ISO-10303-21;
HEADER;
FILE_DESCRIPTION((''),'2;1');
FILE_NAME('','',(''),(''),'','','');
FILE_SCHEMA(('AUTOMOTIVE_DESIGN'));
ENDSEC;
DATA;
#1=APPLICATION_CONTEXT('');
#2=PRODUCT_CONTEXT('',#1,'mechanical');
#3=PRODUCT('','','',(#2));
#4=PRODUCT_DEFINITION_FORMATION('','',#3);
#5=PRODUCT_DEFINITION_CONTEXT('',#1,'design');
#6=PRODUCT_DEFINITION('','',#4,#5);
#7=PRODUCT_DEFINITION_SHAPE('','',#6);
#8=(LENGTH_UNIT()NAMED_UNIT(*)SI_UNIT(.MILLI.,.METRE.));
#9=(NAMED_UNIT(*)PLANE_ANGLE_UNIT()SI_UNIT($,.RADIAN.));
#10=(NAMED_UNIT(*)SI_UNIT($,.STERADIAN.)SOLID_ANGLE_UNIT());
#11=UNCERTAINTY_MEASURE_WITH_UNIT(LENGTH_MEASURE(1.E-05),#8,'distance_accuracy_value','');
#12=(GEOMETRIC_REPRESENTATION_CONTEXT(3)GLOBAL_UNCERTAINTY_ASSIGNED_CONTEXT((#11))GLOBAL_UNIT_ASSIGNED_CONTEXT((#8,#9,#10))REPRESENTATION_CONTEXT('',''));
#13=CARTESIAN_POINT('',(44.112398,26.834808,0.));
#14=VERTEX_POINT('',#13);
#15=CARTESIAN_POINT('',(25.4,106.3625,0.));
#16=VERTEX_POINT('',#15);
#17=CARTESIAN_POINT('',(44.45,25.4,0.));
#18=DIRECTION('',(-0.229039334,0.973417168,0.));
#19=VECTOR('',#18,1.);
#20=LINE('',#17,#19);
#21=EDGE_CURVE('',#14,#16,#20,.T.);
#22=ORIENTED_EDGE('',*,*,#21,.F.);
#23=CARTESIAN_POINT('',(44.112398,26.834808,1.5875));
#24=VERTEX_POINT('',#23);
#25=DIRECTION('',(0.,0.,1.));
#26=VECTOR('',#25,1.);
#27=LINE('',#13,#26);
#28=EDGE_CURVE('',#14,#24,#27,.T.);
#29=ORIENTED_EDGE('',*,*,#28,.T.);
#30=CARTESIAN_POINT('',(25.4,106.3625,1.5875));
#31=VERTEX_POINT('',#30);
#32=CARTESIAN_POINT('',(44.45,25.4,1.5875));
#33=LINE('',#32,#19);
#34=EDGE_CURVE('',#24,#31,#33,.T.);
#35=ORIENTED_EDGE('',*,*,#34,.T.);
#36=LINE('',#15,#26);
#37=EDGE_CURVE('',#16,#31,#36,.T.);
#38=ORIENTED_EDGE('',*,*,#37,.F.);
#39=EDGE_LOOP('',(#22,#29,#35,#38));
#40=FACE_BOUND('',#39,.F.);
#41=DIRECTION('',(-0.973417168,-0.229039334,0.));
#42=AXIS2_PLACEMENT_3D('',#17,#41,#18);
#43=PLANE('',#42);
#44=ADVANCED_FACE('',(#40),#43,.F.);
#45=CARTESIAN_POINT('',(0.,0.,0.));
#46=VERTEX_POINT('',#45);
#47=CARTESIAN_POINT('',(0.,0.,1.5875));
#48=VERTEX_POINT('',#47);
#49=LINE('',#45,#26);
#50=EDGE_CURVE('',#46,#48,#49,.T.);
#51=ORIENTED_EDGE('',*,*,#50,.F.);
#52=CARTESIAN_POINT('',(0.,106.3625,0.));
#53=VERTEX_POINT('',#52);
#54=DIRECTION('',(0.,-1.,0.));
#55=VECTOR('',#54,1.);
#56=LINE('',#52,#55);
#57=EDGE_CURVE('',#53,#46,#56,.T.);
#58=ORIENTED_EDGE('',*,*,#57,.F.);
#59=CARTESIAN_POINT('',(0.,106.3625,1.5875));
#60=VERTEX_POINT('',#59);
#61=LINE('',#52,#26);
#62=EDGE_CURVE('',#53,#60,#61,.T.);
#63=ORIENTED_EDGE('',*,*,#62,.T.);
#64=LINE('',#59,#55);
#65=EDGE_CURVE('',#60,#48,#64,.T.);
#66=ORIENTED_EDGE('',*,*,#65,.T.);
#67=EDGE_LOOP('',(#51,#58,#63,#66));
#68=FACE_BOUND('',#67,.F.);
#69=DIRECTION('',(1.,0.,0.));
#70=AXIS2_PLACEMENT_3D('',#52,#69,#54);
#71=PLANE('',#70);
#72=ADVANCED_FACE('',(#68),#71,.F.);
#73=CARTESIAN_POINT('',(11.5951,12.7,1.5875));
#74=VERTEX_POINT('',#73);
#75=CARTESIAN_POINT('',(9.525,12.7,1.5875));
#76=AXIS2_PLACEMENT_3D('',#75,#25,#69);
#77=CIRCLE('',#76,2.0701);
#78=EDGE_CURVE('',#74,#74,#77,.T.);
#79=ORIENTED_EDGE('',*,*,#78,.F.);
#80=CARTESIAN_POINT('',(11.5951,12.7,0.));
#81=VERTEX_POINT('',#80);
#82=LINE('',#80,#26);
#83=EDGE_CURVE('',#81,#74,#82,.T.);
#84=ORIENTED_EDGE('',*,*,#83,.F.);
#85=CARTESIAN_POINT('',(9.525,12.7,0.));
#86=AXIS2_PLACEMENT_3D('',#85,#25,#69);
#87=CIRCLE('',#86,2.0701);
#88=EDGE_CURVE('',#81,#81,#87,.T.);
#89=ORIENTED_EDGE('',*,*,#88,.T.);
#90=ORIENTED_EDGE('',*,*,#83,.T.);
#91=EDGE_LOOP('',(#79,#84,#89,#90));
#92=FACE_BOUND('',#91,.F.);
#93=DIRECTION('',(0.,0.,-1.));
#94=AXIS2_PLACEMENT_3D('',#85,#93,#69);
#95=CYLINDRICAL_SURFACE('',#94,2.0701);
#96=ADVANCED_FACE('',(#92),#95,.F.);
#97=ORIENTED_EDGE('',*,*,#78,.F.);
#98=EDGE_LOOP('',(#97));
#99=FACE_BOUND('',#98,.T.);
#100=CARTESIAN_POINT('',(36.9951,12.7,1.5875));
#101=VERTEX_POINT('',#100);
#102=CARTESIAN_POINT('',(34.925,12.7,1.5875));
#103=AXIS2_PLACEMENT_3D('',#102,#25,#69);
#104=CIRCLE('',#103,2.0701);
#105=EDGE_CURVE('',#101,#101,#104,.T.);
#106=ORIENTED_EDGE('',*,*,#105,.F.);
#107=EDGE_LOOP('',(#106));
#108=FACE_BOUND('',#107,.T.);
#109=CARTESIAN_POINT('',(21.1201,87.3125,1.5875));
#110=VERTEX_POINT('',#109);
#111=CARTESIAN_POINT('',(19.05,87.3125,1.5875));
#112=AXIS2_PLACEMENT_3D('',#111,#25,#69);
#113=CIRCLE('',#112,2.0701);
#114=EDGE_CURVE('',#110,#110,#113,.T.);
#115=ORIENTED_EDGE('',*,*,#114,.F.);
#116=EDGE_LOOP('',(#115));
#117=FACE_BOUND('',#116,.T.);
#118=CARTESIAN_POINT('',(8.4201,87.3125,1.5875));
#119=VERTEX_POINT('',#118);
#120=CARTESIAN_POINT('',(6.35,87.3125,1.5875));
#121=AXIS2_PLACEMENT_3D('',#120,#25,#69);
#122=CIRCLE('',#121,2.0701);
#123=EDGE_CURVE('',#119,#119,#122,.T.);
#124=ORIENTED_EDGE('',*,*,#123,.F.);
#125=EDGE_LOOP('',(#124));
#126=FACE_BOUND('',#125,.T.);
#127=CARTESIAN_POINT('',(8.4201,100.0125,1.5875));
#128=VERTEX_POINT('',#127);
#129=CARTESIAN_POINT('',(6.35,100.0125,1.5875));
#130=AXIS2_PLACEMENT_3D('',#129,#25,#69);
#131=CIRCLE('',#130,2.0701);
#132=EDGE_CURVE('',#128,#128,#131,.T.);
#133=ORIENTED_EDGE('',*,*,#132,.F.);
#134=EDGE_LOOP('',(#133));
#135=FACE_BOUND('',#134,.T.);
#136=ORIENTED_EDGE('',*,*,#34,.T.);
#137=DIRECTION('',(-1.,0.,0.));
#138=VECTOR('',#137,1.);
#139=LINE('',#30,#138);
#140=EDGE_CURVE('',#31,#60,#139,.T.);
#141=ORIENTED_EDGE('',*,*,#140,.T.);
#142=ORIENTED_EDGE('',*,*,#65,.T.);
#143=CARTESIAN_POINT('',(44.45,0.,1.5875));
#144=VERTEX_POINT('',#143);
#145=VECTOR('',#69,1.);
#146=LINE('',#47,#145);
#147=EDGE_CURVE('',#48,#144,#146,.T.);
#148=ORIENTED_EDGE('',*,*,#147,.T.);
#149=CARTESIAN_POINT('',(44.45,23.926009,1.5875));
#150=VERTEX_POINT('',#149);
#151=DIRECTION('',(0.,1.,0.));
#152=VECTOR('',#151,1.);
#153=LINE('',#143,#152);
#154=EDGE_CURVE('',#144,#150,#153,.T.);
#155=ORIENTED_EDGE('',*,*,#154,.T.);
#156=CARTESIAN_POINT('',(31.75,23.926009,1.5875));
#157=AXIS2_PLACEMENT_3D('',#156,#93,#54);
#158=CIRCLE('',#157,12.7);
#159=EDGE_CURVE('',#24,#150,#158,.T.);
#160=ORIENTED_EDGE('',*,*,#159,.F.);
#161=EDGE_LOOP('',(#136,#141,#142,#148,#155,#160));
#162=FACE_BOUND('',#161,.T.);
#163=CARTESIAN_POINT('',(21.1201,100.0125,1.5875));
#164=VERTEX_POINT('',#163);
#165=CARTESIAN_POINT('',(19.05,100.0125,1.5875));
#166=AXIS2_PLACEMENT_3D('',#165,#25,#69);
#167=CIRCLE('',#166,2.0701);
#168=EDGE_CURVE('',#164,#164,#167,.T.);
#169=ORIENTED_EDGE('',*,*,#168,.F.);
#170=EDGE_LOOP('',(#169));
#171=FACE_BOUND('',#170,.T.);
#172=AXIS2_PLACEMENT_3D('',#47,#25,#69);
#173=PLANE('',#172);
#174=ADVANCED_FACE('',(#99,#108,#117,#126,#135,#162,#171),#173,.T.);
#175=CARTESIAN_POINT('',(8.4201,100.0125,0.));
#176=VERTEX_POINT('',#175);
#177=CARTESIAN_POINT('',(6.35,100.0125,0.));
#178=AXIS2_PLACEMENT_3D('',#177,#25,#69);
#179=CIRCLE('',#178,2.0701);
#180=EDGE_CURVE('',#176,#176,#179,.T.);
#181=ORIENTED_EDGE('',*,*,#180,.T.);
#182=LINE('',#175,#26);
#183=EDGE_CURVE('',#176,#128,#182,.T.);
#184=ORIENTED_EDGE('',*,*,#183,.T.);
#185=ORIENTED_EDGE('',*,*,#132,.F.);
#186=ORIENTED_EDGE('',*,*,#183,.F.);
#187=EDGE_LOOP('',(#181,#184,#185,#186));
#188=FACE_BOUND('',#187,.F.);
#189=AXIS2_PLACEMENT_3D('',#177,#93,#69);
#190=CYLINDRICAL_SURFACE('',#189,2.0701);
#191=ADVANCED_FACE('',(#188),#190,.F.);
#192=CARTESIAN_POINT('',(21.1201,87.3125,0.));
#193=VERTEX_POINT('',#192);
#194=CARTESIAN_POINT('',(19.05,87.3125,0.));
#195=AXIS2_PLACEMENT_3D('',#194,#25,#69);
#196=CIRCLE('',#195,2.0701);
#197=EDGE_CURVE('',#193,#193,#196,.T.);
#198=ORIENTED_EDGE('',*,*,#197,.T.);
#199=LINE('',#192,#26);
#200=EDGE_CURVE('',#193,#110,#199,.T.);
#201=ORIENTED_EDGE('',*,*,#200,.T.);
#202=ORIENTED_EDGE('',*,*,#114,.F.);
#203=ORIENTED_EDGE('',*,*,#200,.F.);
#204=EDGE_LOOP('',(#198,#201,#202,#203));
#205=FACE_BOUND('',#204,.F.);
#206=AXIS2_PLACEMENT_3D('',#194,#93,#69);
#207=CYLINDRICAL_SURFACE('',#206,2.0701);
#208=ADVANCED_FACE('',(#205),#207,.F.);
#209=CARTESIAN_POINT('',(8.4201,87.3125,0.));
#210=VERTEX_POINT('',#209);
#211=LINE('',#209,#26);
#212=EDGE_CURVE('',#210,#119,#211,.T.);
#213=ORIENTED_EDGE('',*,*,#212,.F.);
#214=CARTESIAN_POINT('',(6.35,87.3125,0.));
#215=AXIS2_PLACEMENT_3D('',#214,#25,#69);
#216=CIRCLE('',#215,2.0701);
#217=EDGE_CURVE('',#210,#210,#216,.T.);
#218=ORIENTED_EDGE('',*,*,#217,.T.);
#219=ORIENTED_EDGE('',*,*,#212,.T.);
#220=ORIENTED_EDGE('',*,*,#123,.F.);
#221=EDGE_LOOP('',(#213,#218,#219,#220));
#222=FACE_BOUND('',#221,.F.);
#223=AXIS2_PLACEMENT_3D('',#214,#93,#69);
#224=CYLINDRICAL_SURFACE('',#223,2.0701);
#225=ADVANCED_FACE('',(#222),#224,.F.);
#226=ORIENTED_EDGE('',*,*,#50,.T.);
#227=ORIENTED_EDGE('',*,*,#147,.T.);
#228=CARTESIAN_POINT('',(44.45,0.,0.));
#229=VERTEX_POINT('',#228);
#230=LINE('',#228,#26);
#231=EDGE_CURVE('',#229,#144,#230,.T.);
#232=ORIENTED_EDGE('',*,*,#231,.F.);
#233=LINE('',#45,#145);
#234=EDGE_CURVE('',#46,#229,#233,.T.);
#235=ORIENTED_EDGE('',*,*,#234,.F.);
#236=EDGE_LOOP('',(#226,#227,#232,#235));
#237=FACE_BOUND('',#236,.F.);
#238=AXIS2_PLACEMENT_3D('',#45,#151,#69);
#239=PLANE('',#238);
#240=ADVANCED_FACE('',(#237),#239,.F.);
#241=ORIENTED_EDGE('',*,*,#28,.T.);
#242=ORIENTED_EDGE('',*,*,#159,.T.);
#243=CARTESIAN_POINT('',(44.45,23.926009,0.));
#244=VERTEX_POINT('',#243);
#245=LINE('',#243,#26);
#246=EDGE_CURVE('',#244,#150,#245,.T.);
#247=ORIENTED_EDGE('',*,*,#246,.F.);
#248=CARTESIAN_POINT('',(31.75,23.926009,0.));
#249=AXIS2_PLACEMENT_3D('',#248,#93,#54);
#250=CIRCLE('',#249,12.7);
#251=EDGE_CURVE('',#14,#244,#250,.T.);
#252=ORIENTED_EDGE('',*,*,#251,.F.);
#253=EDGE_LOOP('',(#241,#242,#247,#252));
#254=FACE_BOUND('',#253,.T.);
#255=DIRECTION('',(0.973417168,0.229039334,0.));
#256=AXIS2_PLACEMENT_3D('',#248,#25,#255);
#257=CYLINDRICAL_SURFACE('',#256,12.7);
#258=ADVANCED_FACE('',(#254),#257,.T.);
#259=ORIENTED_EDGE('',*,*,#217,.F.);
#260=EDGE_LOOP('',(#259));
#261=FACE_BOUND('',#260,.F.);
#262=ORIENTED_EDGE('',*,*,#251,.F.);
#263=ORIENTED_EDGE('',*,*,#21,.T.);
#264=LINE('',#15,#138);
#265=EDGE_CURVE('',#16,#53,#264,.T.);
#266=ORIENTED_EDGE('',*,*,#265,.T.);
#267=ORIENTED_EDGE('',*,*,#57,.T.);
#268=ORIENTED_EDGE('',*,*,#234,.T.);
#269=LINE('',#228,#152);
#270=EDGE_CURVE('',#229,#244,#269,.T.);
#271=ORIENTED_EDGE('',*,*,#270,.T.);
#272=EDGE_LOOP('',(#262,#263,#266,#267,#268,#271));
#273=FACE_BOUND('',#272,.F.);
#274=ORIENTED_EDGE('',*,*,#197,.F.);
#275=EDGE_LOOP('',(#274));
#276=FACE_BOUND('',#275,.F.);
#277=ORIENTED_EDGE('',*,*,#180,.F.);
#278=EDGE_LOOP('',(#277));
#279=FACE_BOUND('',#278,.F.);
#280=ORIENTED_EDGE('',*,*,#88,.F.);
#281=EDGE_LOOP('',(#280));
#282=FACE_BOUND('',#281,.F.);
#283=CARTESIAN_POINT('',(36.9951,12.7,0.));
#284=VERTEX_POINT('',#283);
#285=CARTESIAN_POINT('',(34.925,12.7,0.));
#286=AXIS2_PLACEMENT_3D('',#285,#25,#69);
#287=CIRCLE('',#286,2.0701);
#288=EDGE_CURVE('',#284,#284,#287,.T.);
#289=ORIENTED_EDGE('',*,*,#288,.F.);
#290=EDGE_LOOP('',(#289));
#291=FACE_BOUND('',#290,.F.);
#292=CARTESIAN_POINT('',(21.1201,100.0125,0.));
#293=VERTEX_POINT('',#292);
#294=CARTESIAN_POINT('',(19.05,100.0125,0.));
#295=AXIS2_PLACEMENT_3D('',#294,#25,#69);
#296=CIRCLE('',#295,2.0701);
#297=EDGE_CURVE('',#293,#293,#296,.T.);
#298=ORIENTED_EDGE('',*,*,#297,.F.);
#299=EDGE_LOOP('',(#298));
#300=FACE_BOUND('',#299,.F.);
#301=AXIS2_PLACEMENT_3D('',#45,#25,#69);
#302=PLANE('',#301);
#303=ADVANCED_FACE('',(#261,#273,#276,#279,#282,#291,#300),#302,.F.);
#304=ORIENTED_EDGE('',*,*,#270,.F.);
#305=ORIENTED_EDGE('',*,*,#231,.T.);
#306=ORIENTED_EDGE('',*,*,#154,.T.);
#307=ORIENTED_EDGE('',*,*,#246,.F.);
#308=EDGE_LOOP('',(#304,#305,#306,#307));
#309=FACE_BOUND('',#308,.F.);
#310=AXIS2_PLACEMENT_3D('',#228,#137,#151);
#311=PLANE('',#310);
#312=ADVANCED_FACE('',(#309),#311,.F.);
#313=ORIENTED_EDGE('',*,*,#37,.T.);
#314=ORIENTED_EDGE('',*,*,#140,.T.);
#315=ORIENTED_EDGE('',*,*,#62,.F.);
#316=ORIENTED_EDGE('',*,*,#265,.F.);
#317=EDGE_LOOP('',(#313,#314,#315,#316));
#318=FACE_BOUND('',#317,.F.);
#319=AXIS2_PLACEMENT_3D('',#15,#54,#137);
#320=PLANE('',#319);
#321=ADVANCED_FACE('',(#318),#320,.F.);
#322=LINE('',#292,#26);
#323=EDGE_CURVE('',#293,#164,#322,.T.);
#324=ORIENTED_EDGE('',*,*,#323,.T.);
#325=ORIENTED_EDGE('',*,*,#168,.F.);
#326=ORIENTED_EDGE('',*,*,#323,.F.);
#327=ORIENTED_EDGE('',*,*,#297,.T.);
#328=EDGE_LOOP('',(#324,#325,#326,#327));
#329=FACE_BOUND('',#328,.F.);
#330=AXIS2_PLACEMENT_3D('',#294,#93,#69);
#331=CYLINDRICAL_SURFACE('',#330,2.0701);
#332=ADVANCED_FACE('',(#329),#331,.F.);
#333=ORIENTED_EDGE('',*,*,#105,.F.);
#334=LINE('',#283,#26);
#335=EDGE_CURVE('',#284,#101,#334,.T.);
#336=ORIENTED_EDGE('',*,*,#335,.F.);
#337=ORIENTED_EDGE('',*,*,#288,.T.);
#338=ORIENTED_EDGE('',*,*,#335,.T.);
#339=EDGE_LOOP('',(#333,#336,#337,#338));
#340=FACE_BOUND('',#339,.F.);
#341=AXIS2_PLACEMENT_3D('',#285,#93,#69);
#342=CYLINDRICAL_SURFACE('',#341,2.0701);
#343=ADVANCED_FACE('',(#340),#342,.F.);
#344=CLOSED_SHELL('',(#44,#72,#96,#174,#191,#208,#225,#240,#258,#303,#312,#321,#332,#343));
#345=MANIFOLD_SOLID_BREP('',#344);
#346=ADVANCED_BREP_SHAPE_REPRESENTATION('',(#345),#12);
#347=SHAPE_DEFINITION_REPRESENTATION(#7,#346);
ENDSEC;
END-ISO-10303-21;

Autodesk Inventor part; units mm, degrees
ref_plane "YZ Plane" through (0, 0, 0) normal (1, 0, 0) x (0, 1, 0)
ref_plane "XZ Plane" through (0, 0, 0) normal (0, 1, 0) x (-1, 0, 0)
ref_plane "XY Plane" through (0, 0, 0) normal (0, 0, 1) x (1, 0, 0)
sketch "Sketch1" plane through (0, 0, 0) normal (0, 0, 1) x (1, 0, 0)
  line L0 (106.3625, -44.45) -> (0, -44.45)
  line L1 (110.551814, -19.05) -> (110.551814, -44.45)
  line L2 (106.3625, -19.05) -> (110.551814, -19.05)
  line L3 (106.3625, -19.05) -> (110.551814, -19.05)
  line L4 (110.551814, -19.05) -> (110.551814, -22.225)
  line L5 (110.551814, -22.225) -> (106.3625, -22.225)
  line L6 (106.3625, -22.225) -> (106.3625, -19.05)
  line L7 (106.3625, -19.05) -> (106.3625, -44.45)
  line L8 (110.551814, -19.05) -> (110.551814, -44.45)
  line L9 (106.3625, -41.275) -> (110.551814, -41.275)
  line L10 (110.551814, -41.275) -> (110.551814, -44.45)
  line L11 (110.551814, -44.45) -> (106.3625, -44.45)
  line L12 (106.3625, -44.45) -> (106.3625, -41.275)
  point P0 (0, 0)
  point P1 (110.551814, -34.925)
  point P2 (111.304505, 0)
  point P3 (131.506814, -44.45)
  point P4 (131.506814, -19.05)
  dimension "d6" = 25.4
  dimension "d22" = 12.7
  dimension "d54" = 25.4
  dimension "d55" = 106.3625
  dimension "d56" = 25.4
  dimension "d57" = 44.45
  dimension "d58" = 9.525
  dimension "d81" = 6.35
  dimension "d82" = 6.35
  dimension "d85" = 12.7
  dimension "d88" = 12.7
sketch "Sketch1 outline for Plate1" plane through (0, 0, 0) normal (0, 0, 1) x (1, 0, 0)
  line L0 (0, 106.3625) -> (0, 0)
  line L1 (25.4, 106.3625) -> (0, 106.3625)
  line L2 (0, 0) -> (44.45, 0)
  line L3 (44.45, 25.4) -> (25.4, 106.3625)
  line L4 (44.45, 0) -> (44.45, 25.4)
  circle A0 centre (9.525, 12.7) radius 2.0701
  circle A1 centre (34.925, 12.7) radius 2.0701
  circle A2 centre (6.35, 87.3125) radius 2.0701
  circle A3 centre (6.35, 100.0125) radius 2.0701
  circle A4 centre (19.05, 87.3125) radius 2.0701
  circle A5 centre (19.05, 100.0125) radius 2.0701
extrude "Plate1" add sketch "Sketch1 outline for Plate1" along normal blind 1.5875
ref_plane "Work Plane1" through (0, 110.8075, 25.4) normal (0, 1, 0) x (1, 0, 0)
sketch "Sketch4 outline for Cut3" plane through (0, 110.8075, 25.4) normal (0, 1, 0) x (1, 0, 0)
  line L0 (0, 20.955) -> (0, 0)
  line L1 (0, 0) -> (25.4, 0)
  line L2 (25.4, 0) -> (25.4, 20.955)
  line L3 (25.4, 20.955) -> (0, 20.955)
extrude "Cut3" cut sketch "Sketch4 outline for Cut3" against normal blind 1.5875
fillet "Fillet5" radius 12.7 1 edges at (44.45, 25.4, 0.7937)
sketch "Sketch4" plane through (0, 110.8075, 25.4) normal (0, 1, 0) x (1, 0, 0)
  line L0 (25.4, 0) -> (0, 0)
  circle A0 centre (19.05, 6.35) radius 2.3749
  line L1 (0, 0) -> (0, 20.955)
  line L2 (0, 20.955) -> (25.4, 20.955)
  line L3 (25.4, 20.955) -> (25.4, 21.413463)
  line L4 (21.135301, 0) -> (22.225, 0)
  line L5 (0, 0) -> (0, 20.955)
  line L6 (25.4, 20.955) -> (0, 20.955)
  line L7 (25.4, 20.955) -> (25.4, 17.78)
  line L8 (25.4, 17.78) -> (25.4, 9.525)
  line L9 (12.7, 9.525) -> (12.7, 20.955)
  arc A1 (12.7, 9.525) -> (22.225, 0) centre (22.225, 9.525) ccw
  line L10 (25.4, 20.955) -> (25.4, 0)
  line L11 (0, 0) -> (25.4, 0)
  line L12 (25.4, 0) -> (25.4, 20.955)
  point P0 (0, 25.4)
  point P1 (12.7, 0)
  point P2 (25.4, 0)
  point P3 (12.7, 0)
  dimension "d28" = 4.7498
  dimension "d29" = 6.35
  dimension "d34" = 19.05
  dimension "d47" = 3.175
  dimension "d48" = 6.35
  dimension "d49" = 6.35
  dimension "d50" = 9.525
equation "\"d51\" = Thickness"
equation "\"BendRadius\" = Thickness"
equation "\"BendReliefWidth\" = Thickness"
equation "\"BendReliefDepth\" = 0.5 * Thickness"
equation "\"CornerReliefSize\" = 4 * Thickness"
equation "\"MinimumRemnant\" = 2 * Thickness"
equation "\"TransitionRadius\" = BendRadius"
equation "\"JacobiRadiusSize\" = BendRadius"
equation "\"GapSize\" = Thickness"
equation "\"d11\" = BendRadius"
equation "\"Thickness\" = 1.5875"
properties part number "Pneumatic Piston Front Flange (Left Custom)" material "Aluminum 6061"
